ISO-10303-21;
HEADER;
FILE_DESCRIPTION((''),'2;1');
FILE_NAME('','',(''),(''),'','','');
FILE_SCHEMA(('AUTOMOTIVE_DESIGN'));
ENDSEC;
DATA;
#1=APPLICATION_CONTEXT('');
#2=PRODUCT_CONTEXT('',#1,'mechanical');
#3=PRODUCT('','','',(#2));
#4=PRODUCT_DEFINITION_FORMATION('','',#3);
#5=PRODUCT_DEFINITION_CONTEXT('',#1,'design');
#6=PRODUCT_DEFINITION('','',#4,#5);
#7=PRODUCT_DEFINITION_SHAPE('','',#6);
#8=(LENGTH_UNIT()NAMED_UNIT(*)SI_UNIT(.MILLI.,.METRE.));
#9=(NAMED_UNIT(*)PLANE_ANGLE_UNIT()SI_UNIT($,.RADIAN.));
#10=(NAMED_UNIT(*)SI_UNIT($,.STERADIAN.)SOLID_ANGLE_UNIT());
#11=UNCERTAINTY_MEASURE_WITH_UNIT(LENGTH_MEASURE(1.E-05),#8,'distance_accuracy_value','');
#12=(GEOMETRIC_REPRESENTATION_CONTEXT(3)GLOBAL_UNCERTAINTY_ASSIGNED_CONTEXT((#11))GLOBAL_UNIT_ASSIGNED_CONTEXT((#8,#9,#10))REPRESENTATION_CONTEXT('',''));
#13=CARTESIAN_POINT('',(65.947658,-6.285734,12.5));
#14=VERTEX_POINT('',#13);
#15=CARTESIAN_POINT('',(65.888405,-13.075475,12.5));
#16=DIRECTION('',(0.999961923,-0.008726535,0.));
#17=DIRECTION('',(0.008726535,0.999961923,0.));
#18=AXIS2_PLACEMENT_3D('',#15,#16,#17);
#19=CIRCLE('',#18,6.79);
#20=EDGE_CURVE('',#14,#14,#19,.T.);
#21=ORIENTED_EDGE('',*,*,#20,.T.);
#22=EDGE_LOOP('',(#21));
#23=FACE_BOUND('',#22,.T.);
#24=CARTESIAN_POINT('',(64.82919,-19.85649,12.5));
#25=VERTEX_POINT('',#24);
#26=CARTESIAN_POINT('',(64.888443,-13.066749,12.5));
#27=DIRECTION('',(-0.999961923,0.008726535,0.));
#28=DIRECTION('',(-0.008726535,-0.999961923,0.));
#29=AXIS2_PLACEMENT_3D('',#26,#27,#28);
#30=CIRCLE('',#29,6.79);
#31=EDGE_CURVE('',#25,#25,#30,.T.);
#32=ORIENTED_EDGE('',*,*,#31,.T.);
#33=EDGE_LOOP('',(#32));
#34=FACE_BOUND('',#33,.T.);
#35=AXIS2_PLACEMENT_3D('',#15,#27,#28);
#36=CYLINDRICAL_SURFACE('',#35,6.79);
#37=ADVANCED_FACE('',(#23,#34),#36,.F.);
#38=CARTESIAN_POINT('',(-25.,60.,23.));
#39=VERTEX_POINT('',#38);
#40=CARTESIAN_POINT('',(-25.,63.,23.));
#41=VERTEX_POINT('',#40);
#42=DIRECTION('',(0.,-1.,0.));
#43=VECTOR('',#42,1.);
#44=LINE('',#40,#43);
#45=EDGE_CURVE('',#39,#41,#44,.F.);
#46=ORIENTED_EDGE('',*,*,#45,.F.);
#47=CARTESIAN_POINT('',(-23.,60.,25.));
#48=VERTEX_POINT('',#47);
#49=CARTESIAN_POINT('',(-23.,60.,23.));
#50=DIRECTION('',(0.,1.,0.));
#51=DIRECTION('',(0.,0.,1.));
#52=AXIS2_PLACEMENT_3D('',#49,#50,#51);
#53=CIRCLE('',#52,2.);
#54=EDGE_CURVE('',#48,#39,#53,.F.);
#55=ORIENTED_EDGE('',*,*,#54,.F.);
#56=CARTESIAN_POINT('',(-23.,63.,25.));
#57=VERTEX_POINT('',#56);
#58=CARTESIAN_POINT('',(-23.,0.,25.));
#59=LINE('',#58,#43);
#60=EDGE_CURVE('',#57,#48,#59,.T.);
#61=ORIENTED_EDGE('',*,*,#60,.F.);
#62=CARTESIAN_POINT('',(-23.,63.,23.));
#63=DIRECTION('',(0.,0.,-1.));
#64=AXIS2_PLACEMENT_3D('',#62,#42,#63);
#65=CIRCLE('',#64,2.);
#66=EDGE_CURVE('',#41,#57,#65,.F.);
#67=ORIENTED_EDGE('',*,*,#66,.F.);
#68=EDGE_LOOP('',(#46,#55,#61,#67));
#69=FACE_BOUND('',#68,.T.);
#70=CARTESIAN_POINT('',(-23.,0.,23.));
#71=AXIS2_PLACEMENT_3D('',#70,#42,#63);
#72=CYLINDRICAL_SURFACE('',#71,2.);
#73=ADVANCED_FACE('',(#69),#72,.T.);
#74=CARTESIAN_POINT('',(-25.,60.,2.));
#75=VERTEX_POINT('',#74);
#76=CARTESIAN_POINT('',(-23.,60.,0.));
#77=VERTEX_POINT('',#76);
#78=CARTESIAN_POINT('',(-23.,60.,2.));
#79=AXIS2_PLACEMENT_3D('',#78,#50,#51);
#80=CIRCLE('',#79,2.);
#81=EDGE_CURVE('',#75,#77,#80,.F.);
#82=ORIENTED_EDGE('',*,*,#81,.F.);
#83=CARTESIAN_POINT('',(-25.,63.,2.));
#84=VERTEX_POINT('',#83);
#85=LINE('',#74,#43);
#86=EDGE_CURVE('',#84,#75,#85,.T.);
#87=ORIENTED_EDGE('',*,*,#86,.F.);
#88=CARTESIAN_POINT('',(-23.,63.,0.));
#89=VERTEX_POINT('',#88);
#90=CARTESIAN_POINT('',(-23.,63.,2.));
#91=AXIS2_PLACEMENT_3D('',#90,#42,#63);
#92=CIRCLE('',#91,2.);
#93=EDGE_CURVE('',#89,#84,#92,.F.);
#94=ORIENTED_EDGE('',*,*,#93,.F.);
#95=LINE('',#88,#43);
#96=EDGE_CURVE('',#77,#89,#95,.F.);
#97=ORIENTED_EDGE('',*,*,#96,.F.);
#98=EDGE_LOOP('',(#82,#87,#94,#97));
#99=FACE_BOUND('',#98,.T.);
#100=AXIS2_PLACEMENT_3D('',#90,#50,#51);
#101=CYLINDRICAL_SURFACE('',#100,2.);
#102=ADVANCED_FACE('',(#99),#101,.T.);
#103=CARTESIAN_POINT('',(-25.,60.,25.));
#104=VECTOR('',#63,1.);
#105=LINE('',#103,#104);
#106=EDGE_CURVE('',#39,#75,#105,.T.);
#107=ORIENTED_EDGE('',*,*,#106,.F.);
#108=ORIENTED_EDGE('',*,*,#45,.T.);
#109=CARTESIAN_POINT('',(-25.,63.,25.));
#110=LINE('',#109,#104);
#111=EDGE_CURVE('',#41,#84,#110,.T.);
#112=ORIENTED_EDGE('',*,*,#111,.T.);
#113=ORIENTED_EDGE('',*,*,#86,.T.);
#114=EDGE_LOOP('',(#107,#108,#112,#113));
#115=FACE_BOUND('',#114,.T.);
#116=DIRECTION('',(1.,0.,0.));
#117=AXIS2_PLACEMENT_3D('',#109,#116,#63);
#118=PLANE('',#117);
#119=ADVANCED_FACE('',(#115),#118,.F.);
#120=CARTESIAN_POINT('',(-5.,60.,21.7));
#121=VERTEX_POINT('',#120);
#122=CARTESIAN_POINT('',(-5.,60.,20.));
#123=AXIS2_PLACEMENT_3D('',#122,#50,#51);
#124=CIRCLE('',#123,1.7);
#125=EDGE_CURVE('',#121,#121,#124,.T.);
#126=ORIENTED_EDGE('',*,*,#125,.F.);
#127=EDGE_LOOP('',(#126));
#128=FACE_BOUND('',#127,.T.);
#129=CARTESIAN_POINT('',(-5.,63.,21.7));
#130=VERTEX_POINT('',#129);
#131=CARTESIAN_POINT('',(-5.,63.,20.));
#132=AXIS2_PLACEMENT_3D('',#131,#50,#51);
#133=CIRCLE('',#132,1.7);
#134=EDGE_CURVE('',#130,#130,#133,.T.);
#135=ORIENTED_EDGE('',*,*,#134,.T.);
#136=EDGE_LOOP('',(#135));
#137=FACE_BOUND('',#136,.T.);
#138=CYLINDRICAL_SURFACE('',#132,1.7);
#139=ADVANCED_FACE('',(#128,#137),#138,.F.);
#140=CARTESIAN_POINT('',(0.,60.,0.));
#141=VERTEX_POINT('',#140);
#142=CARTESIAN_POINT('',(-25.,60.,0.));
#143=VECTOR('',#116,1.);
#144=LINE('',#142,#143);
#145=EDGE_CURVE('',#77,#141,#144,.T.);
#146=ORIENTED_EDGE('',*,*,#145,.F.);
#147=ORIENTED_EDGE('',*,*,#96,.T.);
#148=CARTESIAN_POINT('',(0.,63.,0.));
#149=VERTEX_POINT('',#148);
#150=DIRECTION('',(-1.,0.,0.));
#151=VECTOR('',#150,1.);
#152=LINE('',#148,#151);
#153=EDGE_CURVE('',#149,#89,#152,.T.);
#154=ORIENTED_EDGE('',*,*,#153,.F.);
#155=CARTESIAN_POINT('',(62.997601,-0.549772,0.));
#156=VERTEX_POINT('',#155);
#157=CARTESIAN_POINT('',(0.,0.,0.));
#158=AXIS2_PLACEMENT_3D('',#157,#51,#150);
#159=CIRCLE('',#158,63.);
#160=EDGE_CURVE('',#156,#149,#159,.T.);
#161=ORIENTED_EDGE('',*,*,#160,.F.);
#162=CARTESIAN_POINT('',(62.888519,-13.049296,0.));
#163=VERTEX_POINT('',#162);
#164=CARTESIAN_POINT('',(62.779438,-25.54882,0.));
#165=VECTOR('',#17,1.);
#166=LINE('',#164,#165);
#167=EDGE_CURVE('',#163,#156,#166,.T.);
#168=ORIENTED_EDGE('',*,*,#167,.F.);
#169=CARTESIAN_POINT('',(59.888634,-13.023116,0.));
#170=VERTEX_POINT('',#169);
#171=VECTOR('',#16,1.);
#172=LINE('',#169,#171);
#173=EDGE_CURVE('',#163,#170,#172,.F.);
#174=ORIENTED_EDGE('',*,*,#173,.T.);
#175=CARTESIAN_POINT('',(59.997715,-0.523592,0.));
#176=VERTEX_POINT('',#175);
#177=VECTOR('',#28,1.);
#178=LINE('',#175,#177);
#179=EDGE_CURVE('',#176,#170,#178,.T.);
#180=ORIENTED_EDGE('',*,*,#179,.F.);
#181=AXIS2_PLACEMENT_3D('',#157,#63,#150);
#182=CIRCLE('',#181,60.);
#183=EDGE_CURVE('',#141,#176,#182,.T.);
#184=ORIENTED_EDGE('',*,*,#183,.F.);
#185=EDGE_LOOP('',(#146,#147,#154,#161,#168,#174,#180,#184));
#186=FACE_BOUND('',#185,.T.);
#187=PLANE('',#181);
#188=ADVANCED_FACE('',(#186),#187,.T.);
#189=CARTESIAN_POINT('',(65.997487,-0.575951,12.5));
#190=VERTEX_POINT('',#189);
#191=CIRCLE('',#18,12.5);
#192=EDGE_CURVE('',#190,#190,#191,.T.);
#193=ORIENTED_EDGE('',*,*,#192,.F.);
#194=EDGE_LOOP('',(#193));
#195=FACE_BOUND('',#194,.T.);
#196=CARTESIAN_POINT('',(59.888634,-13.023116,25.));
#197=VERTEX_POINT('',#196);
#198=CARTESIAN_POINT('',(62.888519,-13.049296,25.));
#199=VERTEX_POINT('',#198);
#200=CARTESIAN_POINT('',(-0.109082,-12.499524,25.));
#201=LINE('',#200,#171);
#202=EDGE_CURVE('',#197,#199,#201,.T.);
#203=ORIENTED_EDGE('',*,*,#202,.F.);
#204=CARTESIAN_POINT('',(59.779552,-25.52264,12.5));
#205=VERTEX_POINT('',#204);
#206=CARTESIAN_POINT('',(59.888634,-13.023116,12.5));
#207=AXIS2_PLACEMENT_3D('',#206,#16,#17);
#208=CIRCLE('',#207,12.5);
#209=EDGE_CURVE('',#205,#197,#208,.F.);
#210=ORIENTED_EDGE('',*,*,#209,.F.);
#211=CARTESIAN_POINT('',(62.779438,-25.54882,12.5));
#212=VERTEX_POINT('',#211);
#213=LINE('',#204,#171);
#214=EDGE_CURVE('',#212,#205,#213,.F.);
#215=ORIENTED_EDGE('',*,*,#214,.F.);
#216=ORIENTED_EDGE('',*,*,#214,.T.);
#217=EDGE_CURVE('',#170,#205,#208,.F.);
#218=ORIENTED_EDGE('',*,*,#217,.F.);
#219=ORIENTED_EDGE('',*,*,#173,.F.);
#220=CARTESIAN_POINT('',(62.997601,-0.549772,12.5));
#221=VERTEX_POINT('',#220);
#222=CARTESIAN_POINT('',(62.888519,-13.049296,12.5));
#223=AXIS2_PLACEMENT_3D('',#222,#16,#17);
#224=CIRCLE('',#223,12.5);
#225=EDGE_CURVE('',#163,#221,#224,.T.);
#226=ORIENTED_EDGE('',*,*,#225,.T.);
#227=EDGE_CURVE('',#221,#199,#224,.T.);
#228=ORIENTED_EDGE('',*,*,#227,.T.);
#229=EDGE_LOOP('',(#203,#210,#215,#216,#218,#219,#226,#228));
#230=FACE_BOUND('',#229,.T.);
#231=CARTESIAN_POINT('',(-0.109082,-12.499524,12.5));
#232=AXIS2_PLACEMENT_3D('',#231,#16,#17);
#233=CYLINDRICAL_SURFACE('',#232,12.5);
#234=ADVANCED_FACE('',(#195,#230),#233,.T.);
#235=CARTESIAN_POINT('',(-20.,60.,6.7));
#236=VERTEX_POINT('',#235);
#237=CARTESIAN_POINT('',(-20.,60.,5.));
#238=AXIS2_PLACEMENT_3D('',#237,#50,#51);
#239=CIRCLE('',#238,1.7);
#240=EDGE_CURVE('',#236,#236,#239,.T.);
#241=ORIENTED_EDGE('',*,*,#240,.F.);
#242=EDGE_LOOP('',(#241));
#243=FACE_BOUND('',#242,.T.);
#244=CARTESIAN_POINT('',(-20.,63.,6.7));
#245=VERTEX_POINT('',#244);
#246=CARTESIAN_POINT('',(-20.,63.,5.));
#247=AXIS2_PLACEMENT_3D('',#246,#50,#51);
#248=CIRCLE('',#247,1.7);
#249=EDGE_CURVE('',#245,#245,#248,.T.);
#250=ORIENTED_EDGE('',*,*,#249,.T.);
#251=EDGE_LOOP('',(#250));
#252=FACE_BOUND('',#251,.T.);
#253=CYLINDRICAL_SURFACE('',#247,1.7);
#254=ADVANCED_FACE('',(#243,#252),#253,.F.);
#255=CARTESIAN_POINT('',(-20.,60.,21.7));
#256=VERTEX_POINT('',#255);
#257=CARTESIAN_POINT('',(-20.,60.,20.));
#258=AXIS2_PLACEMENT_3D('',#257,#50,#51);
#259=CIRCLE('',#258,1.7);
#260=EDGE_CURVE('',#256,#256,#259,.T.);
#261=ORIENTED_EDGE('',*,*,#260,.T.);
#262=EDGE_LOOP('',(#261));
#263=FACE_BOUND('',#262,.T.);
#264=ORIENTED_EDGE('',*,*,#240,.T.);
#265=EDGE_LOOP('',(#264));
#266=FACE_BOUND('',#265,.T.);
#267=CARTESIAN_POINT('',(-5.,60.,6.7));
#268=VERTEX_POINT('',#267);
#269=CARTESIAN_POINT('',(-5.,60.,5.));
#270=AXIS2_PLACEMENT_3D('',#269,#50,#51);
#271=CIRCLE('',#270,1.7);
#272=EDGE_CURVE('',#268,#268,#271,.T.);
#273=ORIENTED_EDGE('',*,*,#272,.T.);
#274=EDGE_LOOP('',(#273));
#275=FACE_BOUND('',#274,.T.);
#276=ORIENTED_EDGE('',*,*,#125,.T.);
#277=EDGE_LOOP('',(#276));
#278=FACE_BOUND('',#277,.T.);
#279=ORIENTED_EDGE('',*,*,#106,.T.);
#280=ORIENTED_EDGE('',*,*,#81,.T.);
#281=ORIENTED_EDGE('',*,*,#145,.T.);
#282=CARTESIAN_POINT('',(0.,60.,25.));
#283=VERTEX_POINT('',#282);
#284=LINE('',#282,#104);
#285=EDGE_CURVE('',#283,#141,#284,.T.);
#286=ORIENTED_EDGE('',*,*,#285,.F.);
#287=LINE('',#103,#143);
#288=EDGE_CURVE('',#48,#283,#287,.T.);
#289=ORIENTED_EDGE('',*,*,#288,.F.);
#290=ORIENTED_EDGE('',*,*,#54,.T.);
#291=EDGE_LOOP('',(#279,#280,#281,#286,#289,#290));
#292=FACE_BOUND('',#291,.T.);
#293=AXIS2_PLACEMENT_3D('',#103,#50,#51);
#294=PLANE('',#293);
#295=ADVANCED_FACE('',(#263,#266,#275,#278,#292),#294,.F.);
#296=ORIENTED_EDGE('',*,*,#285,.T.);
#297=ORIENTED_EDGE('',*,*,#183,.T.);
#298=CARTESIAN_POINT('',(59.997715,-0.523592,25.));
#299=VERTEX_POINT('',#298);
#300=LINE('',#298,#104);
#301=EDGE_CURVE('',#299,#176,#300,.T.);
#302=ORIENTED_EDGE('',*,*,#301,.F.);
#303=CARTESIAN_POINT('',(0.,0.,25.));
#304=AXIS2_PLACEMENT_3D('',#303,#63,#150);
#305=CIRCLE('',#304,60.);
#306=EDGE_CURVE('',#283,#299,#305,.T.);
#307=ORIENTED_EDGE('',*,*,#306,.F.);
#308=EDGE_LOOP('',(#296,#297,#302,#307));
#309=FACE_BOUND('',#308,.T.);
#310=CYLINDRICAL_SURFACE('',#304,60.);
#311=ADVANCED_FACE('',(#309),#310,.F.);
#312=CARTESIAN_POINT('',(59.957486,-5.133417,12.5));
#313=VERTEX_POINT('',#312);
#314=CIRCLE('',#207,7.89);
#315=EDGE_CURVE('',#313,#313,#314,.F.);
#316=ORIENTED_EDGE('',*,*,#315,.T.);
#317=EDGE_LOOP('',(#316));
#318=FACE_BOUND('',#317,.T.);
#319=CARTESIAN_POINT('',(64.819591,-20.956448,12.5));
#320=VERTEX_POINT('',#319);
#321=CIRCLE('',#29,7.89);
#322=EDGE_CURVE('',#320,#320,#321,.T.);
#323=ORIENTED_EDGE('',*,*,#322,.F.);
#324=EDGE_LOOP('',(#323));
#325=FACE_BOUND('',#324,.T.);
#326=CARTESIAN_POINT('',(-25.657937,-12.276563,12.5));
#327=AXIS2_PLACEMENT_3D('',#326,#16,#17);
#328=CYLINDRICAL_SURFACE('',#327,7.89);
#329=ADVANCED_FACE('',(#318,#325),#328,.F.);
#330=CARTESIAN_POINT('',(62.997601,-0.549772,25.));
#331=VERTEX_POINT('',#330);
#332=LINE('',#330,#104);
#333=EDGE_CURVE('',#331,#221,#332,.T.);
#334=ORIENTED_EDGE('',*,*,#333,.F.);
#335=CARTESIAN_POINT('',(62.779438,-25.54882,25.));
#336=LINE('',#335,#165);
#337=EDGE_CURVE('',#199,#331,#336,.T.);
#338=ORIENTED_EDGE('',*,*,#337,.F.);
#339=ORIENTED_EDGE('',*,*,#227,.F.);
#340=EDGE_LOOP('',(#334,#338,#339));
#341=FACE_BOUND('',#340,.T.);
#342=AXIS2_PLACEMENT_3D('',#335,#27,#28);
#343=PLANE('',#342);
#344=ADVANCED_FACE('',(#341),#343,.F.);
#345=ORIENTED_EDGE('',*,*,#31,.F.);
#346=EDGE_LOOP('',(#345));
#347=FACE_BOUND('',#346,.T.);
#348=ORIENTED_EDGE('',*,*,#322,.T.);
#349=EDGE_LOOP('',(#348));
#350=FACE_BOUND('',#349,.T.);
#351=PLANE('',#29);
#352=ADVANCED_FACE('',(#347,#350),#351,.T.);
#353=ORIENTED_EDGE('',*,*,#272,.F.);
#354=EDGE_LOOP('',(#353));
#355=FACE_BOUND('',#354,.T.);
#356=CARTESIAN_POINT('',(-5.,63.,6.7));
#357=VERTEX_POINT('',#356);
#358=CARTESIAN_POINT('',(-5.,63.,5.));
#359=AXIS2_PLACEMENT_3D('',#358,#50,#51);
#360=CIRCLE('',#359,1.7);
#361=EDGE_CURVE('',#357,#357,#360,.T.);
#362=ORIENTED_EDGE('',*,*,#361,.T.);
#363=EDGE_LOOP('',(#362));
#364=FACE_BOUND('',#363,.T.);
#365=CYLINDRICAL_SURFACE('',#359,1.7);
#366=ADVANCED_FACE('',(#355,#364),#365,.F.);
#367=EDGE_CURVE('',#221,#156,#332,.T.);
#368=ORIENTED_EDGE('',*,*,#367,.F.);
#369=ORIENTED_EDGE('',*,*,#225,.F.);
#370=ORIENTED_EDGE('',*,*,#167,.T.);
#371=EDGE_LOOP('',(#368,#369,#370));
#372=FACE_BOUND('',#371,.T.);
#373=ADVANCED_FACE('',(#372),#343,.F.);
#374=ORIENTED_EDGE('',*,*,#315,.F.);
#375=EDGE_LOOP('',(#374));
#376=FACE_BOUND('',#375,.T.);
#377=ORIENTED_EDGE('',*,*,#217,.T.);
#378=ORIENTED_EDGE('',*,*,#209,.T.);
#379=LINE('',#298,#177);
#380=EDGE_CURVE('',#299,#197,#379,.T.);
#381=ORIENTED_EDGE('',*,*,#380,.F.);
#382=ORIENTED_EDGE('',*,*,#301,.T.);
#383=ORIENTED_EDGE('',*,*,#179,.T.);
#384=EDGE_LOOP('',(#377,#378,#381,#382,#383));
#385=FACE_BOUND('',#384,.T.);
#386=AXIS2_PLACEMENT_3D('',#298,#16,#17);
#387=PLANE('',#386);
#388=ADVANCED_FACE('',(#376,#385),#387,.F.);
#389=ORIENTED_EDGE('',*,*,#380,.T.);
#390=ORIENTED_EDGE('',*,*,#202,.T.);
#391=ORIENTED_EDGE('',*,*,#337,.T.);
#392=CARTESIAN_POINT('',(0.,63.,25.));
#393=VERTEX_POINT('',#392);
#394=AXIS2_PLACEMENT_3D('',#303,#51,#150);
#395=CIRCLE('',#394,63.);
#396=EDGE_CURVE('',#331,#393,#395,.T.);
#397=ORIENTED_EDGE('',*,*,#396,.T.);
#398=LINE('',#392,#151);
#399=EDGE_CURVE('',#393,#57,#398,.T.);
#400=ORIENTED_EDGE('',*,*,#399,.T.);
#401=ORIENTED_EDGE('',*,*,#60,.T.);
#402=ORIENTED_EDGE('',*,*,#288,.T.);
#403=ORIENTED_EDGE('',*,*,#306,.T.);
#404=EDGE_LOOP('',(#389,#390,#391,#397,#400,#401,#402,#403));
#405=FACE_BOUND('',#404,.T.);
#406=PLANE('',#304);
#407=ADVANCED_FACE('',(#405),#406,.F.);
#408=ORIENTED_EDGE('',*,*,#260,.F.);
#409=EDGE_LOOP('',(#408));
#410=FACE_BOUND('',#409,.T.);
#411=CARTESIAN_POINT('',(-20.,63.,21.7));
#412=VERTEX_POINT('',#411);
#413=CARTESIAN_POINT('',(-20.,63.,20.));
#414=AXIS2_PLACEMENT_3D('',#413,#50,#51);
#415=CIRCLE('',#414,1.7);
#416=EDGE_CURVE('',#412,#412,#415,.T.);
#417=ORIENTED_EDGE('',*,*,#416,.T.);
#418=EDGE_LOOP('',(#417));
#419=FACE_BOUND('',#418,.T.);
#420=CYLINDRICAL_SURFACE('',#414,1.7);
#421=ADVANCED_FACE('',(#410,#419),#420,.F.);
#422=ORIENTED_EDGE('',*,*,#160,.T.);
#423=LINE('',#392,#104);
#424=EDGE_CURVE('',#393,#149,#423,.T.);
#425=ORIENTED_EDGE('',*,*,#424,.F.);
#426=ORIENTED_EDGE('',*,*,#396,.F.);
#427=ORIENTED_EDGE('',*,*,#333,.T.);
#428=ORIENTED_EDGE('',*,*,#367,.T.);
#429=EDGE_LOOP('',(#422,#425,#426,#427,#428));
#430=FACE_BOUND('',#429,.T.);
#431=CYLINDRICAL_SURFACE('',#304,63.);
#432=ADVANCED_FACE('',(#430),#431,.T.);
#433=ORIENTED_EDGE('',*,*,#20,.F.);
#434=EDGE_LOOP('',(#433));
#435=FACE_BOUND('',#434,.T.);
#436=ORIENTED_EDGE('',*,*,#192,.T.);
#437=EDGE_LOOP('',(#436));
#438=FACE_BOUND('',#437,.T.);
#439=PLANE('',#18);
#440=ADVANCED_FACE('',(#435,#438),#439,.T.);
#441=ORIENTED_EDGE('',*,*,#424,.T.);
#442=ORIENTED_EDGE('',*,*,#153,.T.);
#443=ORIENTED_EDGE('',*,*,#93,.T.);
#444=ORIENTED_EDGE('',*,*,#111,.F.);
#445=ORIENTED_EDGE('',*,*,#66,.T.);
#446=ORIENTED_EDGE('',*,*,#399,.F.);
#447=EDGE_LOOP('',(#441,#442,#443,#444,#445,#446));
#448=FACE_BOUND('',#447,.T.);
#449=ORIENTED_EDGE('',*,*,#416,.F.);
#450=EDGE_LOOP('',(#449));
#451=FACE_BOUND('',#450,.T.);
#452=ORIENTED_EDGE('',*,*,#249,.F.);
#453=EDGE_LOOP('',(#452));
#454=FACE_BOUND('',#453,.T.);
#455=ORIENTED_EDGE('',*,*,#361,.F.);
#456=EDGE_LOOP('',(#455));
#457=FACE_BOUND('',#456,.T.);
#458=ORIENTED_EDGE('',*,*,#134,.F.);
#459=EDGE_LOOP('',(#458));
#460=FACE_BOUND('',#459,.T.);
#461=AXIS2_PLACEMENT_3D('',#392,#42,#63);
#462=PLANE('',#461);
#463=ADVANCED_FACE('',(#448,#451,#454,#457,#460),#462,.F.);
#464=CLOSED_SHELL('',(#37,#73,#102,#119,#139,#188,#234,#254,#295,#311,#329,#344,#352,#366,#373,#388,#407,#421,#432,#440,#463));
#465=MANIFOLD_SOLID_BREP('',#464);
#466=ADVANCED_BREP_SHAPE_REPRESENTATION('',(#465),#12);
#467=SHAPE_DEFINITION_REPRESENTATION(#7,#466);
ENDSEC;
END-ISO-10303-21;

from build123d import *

# Parameters (mm, degrees)
BOSS_EXTRUDE1_DEPTH  = 25
M3_CLEARANCE_HOLE1_D = 3.4
SKETCH6_R            = 7.89
CUT_EXTRUDE1_DEPTH   = 3
FILLET1_R            = 12.5
FILLET2_R            = 2
SKETCH7_R            = 12.5
SKETCH7_R_2          = 6.79
BOSS_EXTRUDE2_DEPTH  = 3
CUT_EXTRUDE2_START   = -5
SKETCH9_R            = 7.89
CUT_EXTRUDE2_DEPTH   = 5


with BuildPart() as part:
    # Sketch2 → Boss-Extrude1 (new body)
    with BuildSketch(Plane.XY):
        with BuildLine():
            Line((0, 63), (-25, 63))
            Line((-25, 63), (-25, 60))
            Line((-25, 60), (0, 60))
            ThreePointArc((0, 60), (42.611122537, 42.240883467), (59.997715384, -0.52359213))
            Line((59.997715384, -0.52359213), (59.779551996, -25.522640207))
            Line((59.779551996, -25.522640207), (62.779437766, -25.548819813))
            Line((62.779437766, -25.548819813), (62.997601153, -0.549771736))
            ThreePointArc((62.997601153, -0.549771736), (44.741678664, 44.352927641), (0, 63))
        make_face()
    extrude(amount=BOSS_EXTRUDE1_DEPTH)

    # M3 Clearance Hole1 (through all)
    with Locations(Plane(origin=(0, 63, 0), x_dir=(1, 0, 0), z_dir=(0, 1, 0))):
        with Locations((-20, -5), (-5, -20), (-20, -20), (-5, -5)):
            Hole(M3_CLEARANCE_HOLE1_D / 2)

    # Sketch6 → Cut-Extrude1 (cut)
    with BuildSketch(Plane(origin=(62.997601153, -0.549771736, 0), x_dir=(0, 0, -1), z_dir=(0.9999619230641714, -0.00872653549837746, 0))):
        with Locations(Location((-12.5, -12.5, 0), (0, 0, 90))):
            Circle(SKETCH6_R)
    extrude(amount=-CUT_EXTRUDE1_DEPTH, mode=Mode.SUBTRACT)

    # Fillet1
    fillet1_edges = [part.edges().sort_by_distance(p)[0] for p in [
        (61.279494881, -25.53573001, 0),
        (61.279494881, -25.53573001, 25),
    ]]
    fillet(fillet1_edges, radius=FILLET1_R - 0.0001)  # a hair under: the kernel refuses the full size

    # Fillet2
    fillet2_edges = [part.edges().sort_by_distance(p)[0] for p in [
        (-25, 61.5, 25),
        (-25, 61.5, 0),
    ]]
    fillet(fillet2_edges, radius=FILLET2_R)

    # Sketch7 → Boss-Extrude2 (add)
    with BuildSketch(Plane(origin=(62.997601153, -0.549771736, 0), x_dir=(0, 0, -1), z_dir=(0.9999619230641714, -0.00872653549837732, 0))):
        with Locations(Location((-12.5, -12.5, 0), (0, 0, 90))):
            Circle(SKETCH7_R)
        with Locations(Location((-12.5, -12.5, 0), (0, 0, 90))):
            Circle(SKETCH7_R_2, mode=Mode.SUBTRACT)
    extrude(amount=BOSS_EXTRUDE2_DEPTH)

    # Sketch9 → Cut-Extrude2 (cut)
    with BuildSketch(Plane(origin=(59.997715384, -0.52359213, 0), x_dir=(0, 0, 1), z_dir=(-0.9999619230641714, 0.008726535498377324, 0)).offset(CUT_EXTRUDE2_START)):
        with Locations(Location((12.5, -12.5, 0), (0, 0, 90))):
            Circle(SKETCH9_R)
    extrude(amount=CUT_EXTRUDE2_DEPTH, mode=Mode.SUBTRACT)


solid = part.part
